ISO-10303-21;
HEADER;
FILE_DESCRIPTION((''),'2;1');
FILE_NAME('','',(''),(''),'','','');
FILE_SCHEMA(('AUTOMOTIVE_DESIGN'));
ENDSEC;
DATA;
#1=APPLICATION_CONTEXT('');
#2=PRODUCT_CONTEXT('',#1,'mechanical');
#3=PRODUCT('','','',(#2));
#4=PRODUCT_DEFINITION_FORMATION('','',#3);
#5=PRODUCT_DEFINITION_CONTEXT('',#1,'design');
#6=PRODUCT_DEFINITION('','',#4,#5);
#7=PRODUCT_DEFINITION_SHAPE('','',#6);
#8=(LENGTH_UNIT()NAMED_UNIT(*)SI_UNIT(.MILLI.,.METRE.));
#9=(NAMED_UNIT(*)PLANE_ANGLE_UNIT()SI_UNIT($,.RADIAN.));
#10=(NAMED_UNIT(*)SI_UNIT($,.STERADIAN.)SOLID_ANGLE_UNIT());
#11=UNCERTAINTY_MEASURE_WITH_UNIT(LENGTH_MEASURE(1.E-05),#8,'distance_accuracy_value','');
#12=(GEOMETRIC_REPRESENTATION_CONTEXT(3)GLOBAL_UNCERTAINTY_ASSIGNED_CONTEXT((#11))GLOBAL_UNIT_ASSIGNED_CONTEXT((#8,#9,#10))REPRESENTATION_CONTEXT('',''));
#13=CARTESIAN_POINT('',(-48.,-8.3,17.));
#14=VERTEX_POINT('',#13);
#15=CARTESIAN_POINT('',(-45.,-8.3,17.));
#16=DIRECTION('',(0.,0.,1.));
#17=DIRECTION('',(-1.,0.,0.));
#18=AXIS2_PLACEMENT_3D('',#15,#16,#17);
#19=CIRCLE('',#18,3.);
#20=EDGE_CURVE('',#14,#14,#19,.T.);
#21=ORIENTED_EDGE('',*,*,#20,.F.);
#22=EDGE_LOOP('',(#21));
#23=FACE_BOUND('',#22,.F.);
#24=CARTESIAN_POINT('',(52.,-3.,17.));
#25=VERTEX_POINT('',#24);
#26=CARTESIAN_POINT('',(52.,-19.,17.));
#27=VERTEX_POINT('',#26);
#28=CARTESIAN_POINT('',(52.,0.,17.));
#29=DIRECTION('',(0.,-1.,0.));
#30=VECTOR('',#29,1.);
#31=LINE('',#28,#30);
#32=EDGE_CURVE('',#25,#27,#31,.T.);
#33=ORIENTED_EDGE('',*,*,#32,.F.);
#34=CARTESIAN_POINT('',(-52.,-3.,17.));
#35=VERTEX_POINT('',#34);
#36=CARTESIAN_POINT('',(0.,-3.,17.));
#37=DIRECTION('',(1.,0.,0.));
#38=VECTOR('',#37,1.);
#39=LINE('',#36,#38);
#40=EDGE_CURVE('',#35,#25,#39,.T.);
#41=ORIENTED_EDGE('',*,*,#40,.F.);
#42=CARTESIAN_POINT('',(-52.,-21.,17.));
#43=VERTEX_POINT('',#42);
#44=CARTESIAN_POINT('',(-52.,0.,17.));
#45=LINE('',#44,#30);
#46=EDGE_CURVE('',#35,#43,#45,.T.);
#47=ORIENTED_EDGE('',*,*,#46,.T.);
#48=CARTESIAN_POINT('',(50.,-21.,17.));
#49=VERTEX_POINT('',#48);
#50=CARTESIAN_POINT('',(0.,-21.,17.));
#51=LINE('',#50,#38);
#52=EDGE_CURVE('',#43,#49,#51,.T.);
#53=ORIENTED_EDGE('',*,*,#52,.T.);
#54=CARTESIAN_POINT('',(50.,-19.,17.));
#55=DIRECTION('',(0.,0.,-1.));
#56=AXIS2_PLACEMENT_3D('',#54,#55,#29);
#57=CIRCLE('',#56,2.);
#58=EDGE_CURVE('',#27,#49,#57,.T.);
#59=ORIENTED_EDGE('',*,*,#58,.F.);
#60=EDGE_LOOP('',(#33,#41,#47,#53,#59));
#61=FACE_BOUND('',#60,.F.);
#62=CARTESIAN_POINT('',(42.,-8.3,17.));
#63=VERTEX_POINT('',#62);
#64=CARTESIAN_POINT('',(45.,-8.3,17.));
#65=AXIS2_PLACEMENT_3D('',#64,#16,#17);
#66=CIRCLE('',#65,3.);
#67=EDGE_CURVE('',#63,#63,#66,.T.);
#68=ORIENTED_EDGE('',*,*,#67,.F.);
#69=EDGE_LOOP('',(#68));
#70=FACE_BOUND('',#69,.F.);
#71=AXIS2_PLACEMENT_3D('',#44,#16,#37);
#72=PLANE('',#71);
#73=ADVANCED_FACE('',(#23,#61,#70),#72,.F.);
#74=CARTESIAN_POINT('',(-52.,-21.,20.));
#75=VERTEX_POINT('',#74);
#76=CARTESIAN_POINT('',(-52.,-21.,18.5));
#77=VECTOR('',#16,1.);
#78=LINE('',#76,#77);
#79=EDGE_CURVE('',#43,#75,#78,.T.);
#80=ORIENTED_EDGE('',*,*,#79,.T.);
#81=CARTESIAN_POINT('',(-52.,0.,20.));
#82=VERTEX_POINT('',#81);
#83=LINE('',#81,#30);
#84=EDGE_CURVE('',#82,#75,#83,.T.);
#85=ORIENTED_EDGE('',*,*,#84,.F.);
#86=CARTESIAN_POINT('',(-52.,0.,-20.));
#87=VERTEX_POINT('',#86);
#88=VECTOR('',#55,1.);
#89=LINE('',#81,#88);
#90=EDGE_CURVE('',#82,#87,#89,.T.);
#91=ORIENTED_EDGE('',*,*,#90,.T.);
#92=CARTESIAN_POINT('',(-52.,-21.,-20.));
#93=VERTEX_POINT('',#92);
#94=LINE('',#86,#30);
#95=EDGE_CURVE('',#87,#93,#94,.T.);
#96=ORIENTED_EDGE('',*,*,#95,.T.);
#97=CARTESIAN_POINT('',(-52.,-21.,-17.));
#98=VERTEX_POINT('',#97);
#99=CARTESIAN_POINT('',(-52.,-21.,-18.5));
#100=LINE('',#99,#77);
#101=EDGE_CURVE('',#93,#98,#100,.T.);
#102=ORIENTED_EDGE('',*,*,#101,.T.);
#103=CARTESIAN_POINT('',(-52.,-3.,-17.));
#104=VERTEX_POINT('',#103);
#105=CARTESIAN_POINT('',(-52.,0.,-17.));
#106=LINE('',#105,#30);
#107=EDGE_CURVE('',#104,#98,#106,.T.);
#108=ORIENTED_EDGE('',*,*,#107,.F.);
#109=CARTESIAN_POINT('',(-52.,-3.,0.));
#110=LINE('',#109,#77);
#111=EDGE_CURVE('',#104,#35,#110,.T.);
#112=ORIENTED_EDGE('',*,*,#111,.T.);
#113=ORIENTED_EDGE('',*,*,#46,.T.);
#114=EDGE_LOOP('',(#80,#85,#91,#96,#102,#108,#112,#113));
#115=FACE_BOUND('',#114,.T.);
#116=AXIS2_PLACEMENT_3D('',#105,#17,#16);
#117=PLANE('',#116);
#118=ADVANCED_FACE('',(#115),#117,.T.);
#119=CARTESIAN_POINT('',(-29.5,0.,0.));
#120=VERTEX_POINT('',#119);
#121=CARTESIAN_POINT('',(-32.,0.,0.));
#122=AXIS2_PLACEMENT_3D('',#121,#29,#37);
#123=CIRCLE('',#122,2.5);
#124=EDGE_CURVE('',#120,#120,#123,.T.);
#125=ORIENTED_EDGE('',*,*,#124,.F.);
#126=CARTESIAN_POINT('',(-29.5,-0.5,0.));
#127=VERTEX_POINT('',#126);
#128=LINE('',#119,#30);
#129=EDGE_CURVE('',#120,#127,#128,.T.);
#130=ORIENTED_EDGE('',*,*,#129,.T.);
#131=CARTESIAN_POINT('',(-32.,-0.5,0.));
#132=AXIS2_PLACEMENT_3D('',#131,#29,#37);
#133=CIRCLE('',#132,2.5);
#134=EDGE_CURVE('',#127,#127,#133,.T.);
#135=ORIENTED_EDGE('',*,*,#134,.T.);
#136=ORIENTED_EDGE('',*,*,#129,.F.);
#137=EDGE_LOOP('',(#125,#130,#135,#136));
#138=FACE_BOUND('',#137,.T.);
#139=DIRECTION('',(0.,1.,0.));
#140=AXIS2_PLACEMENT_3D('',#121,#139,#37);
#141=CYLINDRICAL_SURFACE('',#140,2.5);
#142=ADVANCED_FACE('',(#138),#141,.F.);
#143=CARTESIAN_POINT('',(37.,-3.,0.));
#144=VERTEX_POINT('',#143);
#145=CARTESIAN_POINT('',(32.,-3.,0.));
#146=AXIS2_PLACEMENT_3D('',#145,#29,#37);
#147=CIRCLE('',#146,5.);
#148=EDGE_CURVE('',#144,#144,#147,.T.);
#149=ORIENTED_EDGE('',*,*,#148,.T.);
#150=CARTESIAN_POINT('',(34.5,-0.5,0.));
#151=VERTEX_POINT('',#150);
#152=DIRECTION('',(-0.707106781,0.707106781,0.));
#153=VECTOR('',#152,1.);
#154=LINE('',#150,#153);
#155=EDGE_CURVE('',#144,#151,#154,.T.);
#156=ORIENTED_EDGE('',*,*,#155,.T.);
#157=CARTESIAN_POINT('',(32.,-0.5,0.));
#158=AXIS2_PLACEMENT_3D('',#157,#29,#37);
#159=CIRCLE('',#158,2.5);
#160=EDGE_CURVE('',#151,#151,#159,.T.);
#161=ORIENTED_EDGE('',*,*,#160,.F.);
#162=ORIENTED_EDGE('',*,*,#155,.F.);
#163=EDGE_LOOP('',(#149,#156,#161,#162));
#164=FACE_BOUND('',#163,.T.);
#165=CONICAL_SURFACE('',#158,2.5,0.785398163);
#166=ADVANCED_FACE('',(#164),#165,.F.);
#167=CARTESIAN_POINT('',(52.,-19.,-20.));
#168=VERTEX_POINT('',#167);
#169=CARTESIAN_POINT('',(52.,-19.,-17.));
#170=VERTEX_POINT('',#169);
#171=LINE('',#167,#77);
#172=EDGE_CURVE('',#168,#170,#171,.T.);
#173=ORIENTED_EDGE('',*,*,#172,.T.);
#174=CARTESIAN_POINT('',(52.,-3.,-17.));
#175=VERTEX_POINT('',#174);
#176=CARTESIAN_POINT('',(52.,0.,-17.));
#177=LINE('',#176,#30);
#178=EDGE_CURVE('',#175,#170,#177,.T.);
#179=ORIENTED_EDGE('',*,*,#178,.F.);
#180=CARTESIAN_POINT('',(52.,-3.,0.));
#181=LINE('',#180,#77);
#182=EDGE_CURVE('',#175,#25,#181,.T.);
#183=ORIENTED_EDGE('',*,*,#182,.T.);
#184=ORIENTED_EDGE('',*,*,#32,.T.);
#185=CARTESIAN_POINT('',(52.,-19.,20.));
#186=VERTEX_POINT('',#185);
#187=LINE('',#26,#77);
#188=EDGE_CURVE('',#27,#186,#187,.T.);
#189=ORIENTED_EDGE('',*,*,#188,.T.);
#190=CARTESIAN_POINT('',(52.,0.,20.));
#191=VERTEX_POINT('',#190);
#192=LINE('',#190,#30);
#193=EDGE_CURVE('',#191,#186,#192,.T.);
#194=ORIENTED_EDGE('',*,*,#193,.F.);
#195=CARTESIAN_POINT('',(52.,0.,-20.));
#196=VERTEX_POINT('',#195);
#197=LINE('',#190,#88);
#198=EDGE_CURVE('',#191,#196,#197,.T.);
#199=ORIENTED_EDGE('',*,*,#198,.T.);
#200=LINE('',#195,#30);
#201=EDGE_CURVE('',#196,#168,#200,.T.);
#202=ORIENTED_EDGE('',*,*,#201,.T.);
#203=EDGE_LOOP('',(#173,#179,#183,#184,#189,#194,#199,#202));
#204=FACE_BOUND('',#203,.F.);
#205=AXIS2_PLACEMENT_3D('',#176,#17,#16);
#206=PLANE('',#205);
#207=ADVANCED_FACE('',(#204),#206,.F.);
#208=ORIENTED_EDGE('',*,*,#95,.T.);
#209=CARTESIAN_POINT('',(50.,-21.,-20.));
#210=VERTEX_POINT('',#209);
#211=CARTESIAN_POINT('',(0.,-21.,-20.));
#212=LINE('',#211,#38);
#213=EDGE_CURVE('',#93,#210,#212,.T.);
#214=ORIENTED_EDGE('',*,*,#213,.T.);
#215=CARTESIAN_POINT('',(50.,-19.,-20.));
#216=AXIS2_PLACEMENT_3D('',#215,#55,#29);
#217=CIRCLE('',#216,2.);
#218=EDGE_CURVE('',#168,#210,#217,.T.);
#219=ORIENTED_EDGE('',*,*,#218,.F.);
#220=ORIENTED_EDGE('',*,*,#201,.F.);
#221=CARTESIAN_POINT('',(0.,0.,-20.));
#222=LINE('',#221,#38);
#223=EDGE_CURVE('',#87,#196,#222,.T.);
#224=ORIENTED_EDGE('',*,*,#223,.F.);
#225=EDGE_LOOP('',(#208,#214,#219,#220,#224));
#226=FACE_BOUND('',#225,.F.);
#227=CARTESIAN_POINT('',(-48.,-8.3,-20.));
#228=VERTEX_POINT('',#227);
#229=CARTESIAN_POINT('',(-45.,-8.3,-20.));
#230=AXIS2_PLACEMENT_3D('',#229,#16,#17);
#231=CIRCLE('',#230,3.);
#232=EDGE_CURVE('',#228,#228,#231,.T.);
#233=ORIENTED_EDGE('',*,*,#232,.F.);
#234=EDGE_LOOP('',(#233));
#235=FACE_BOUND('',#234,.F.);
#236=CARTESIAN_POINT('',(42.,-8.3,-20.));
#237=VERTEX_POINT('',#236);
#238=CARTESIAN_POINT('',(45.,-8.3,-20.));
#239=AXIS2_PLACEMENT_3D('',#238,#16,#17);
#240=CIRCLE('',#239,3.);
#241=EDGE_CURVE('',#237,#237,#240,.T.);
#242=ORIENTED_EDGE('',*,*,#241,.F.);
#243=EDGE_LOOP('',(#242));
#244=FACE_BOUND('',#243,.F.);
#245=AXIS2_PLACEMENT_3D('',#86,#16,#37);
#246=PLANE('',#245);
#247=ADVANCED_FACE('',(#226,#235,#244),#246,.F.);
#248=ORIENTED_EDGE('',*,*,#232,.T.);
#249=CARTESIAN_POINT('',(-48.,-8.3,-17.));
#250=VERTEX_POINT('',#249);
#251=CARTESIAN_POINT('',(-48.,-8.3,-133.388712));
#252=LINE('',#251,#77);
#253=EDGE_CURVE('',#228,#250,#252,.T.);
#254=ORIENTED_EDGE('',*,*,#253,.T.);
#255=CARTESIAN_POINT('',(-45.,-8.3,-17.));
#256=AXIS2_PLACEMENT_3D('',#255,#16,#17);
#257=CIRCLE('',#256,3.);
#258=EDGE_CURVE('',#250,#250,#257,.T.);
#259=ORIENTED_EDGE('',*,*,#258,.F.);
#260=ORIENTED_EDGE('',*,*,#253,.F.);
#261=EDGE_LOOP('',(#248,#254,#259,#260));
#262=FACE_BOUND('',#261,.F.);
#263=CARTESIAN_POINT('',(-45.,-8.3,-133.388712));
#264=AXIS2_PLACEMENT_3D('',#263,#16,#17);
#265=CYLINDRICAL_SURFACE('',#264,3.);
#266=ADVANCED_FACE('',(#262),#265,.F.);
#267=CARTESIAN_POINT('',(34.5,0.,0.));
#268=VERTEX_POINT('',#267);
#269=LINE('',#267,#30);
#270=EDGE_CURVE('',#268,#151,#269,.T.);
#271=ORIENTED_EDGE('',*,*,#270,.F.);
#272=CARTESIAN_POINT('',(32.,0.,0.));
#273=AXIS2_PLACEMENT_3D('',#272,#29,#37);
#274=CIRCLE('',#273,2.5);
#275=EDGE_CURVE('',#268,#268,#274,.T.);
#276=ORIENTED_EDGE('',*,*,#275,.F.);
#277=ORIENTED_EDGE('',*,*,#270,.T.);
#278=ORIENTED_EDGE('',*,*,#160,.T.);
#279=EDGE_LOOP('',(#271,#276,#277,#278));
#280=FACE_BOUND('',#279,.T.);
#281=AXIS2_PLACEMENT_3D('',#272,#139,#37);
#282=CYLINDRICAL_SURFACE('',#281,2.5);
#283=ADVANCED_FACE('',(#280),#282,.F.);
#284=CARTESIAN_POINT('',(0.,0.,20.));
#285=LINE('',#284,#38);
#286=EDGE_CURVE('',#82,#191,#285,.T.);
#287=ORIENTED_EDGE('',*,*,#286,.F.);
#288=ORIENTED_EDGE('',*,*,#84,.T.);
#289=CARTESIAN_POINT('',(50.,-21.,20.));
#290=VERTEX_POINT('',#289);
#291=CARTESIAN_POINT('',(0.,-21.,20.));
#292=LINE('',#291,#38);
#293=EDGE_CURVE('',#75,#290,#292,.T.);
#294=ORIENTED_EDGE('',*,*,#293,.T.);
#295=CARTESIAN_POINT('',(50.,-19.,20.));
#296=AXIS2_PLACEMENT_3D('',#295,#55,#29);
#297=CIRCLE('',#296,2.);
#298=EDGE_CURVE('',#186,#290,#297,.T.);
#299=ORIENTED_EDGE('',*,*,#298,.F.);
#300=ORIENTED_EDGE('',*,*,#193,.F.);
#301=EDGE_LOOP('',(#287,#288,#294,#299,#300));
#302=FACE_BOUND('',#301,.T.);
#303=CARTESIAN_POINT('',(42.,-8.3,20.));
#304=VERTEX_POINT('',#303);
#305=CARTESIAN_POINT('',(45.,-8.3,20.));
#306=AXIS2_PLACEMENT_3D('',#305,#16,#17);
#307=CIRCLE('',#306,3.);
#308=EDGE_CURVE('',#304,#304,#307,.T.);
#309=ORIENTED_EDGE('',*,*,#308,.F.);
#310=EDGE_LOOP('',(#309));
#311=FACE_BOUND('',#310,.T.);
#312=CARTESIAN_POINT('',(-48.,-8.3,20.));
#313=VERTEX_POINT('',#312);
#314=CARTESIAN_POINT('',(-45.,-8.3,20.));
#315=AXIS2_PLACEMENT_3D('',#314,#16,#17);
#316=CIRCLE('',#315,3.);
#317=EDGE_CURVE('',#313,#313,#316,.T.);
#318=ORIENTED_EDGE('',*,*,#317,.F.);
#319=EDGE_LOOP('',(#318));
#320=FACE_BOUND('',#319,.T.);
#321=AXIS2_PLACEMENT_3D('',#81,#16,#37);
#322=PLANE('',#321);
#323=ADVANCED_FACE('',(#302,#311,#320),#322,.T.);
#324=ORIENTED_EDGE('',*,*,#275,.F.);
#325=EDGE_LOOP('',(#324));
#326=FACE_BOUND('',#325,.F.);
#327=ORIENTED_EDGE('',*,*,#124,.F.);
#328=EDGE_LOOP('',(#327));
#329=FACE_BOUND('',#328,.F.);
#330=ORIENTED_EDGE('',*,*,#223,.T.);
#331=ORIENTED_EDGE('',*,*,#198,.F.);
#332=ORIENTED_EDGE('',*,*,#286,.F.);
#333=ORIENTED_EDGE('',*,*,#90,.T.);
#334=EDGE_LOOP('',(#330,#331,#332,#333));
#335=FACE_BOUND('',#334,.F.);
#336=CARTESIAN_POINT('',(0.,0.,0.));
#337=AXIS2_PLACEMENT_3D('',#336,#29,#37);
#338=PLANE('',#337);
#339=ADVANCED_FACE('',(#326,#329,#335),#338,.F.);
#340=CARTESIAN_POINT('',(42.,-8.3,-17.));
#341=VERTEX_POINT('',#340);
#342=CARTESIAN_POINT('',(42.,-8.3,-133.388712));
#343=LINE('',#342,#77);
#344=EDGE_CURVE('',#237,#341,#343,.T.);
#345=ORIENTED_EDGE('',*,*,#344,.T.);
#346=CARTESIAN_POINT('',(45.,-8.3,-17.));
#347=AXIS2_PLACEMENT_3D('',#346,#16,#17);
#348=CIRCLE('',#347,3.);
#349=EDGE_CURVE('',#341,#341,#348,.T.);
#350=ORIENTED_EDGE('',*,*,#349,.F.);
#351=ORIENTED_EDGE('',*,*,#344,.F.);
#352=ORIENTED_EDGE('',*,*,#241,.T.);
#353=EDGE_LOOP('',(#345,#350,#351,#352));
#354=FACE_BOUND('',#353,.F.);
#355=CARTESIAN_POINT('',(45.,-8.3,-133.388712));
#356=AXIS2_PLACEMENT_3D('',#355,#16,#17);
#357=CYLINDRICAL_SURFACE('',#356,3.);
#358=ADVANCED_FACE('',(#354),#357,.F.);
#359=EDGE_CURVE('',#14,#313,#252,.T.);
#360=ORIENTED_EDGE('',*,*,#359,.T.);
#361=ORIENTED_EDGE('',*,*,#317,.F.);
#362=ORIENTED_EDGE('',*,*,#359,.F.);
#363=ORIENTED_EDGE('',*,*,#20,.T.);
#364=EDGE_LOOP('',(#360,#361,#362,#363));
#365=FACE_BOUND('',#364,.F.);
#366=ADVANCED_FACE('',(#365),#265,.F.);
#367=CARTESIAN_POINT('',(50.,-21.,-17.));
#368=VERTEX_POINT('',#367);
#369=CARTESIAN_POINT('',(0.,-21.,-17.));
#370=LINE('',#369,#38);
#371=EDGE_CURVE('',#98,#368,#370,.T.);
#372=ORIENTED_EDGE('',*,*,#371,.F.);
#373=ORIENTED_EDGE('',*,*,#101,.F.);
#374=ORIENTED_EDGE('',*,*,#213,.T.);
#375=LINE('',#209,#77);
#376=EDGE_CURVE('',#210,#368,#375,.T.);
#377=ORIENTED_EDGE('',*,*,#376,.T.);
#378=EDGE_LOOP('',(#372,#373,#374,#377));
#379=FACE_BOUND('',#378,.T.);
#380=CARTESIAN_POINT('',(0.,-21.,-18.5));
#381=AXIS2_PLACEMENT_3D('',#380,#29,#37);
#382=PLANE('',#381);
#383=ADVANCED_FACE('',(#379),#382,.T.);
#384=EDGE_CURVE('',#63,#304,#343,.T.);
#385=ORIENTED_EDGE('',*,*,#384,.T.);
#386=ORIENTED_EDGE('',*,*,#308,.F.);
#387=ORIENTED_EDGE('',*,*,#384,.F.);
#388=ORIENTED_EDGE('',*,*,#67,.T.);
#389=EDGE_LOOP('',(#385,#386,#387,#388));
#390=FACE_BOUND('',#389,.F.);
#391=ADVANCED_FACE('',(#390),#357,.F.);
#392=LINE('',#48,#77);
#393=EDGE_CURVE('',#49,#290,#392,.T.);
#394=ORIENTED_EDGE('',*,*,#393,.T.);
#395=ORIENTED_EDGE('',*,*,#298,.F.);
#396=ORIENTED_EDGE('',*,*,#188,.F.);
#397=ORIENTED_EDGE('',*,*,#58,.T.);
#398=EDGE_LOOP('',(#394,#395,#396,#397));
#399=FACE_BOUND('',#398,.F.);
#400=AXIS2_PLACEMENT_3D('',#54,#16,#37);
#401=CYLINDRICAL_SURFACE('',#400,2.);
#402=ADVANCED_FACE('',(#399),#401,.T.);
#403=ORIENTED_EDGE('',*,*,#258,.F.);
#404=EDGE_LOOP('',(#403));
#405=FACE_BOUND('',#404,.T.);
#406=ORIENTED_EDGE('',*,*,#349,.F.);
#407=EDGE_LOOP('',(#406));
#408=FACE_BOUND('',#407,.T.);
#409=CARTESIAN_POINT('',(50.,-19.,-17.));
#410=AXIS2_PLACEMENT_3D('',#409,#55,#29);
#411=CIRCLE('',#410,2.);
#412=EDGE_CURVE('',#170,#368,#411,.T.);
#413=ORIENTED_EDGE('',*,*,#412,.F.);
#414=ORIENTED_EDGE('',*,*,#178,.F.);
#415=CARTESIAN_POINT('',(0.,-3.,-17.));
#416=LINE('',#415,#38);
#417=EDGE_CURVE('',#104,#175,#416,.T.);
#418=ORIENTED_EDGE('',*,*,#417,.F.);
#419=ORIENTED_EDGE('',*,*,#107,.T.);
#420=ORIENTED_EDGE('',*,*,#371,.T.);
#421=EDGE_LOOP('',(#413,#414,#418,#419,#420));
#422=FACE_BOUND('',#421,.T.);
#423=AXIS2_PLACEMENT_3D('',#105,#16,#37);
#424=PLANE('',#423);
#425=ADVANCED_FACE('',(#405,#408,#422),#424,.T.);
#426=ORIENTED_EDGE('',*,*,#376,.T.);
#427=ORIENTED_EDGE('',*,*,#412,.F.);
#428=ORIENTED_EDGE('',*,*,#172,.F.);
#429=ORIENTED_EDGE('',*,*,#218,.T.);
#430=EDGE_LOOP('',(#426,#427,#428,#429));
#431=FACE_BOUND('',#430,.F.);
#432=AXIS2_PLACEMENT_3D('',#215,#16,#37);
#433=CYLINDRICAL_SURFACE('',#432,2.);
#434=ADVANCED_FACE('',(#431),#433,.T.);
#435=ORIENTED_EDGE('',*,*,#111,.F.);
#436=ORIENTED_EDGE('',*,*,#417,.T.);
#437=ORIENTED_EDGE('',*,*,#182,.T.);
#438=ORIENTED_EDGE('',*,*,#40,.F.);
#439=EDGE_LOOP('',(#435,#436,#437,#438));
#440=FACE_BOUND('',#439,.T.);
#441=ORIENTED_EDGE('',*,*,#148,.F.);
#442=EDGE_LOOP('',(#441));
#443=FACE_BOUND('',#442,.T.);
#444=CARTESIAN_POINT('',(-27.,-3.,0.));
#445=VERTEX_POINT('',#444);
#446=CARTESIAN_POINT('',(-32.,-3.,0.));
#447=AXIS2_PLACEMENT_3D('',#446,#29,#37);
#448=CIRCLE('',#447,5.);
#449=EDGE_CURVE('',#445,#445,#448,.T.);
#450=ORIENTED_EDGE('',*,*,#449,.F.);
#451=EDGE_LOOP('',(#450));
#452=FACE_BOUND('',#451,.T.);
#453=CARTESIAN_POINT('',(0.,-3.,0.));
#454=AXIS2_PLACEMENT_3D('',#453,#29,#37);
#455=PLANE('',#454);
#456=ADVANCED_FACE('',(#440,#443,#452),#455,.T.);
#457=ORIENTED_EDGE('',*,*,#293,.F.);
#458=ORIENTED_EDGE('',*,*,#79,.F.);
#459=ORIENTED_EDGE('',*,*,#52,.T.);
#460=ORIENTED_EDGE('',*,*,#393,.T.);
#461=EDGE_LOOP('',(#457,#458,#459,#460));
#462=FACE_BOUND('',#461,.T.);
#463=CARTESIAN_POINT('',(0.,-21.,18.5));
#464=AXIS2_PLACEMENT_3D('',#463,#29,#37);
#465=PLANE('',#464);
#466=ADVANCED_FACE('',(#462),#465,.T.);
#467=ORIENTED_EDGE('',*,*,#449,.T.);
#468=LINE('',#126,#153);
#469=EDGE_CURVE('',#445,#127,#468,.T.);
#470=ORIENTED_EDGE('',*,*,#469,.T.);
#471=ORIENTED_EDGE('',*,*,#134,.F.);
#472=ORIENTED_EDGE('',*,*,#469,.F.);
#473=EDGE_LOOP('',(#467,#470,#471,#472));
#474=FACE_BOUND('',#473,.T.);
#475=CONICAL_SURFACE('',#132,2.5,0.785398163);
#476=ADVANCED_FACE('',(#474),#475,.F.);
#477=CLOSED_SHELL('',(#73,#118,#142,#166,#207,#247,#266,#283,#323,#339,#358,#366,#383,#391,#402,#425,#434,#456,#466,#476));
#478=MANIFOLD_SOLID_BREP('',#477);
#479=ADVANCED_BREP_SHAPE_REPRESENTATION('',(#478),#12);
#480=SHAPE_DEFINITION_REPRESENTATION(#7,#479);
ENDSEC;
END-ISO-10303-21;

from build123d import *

# Parameters (mm, degrees)
F0_W     = 104
F0_H     = 3
F1_DEPTH = 21
F0_H_2   = 34
F0_R     = 2.5
F2_DEPTH = 3
F4_D     = 6
F5_SIZE  = 2.5
F6_SIZE  = 2.5
F7_R     = 2


with BuildPart() as f1:
    # F0 (on Front) → F1 (new body)
    with BuildSketch(Plane.XZ):
        with Locations((0, 18.5)):
            Rectangle(F0_W, F0_H)
    extrude(amount=F1_DEPTH)



with BuildPart() as f1b:
    # F0 (on Front) → F1, piece 2 (new body)
    with BuildSketch(Plane.XZ):
        with Locations((0, -18.5)):
            Rectangle(F0_W, F0_H)
    extrude(amount=F1_DEPTH)


with BuildPart() as f1_1:
    add(f1.part)

    add(f1b.part)  # F2 merges F1b
    # F0 (on Front) → F2 (join)
    with BuildSketch(Plane.XZ):
        Rectangle(F0_W, F0_H_2)
        with Locations((-32, 0)):
            Circle(F0_R, mode=Mode.SUBTRACT)
        with Locations((32, 0)):
            Circle(F0_R, mode=Mode.SUBTRACT)
    extrude(amount=F2_DEPTH)

    # F4 (through all)
    with Locations(Plane(origin=(0, 0, -20), x_dir=(1, 0, 0), z_dir=(0, 0, -1))):
        with Locations((-45, 8.3), (45, 8.2999998429)):
            Hole(F4_D / 2)

    # F5
    f5_edges = [f1_1.edges().sort_by_distance(p)[0] for p in [
        (-34.5, -3, 0),
    ]]
    chamfer(f5_edges, length=F5_SIZE)

    # F6
    f6_edges = [f1_1.edges().sort_by_distance(p)[0] for p in [
        (29.5, -3, 0),
    ]]
    chamfer(f6_edges, length=F6_SIZE)

    # F7
    f7_edges = [f1_1.edges().sort_by_distance(p)[0] for p in [
        (52, -21, -18.5),
        (52, -21, 18.5),
    ]]
    fillet(f7_edges, radius=F7_R)


solid = f1_1.part
